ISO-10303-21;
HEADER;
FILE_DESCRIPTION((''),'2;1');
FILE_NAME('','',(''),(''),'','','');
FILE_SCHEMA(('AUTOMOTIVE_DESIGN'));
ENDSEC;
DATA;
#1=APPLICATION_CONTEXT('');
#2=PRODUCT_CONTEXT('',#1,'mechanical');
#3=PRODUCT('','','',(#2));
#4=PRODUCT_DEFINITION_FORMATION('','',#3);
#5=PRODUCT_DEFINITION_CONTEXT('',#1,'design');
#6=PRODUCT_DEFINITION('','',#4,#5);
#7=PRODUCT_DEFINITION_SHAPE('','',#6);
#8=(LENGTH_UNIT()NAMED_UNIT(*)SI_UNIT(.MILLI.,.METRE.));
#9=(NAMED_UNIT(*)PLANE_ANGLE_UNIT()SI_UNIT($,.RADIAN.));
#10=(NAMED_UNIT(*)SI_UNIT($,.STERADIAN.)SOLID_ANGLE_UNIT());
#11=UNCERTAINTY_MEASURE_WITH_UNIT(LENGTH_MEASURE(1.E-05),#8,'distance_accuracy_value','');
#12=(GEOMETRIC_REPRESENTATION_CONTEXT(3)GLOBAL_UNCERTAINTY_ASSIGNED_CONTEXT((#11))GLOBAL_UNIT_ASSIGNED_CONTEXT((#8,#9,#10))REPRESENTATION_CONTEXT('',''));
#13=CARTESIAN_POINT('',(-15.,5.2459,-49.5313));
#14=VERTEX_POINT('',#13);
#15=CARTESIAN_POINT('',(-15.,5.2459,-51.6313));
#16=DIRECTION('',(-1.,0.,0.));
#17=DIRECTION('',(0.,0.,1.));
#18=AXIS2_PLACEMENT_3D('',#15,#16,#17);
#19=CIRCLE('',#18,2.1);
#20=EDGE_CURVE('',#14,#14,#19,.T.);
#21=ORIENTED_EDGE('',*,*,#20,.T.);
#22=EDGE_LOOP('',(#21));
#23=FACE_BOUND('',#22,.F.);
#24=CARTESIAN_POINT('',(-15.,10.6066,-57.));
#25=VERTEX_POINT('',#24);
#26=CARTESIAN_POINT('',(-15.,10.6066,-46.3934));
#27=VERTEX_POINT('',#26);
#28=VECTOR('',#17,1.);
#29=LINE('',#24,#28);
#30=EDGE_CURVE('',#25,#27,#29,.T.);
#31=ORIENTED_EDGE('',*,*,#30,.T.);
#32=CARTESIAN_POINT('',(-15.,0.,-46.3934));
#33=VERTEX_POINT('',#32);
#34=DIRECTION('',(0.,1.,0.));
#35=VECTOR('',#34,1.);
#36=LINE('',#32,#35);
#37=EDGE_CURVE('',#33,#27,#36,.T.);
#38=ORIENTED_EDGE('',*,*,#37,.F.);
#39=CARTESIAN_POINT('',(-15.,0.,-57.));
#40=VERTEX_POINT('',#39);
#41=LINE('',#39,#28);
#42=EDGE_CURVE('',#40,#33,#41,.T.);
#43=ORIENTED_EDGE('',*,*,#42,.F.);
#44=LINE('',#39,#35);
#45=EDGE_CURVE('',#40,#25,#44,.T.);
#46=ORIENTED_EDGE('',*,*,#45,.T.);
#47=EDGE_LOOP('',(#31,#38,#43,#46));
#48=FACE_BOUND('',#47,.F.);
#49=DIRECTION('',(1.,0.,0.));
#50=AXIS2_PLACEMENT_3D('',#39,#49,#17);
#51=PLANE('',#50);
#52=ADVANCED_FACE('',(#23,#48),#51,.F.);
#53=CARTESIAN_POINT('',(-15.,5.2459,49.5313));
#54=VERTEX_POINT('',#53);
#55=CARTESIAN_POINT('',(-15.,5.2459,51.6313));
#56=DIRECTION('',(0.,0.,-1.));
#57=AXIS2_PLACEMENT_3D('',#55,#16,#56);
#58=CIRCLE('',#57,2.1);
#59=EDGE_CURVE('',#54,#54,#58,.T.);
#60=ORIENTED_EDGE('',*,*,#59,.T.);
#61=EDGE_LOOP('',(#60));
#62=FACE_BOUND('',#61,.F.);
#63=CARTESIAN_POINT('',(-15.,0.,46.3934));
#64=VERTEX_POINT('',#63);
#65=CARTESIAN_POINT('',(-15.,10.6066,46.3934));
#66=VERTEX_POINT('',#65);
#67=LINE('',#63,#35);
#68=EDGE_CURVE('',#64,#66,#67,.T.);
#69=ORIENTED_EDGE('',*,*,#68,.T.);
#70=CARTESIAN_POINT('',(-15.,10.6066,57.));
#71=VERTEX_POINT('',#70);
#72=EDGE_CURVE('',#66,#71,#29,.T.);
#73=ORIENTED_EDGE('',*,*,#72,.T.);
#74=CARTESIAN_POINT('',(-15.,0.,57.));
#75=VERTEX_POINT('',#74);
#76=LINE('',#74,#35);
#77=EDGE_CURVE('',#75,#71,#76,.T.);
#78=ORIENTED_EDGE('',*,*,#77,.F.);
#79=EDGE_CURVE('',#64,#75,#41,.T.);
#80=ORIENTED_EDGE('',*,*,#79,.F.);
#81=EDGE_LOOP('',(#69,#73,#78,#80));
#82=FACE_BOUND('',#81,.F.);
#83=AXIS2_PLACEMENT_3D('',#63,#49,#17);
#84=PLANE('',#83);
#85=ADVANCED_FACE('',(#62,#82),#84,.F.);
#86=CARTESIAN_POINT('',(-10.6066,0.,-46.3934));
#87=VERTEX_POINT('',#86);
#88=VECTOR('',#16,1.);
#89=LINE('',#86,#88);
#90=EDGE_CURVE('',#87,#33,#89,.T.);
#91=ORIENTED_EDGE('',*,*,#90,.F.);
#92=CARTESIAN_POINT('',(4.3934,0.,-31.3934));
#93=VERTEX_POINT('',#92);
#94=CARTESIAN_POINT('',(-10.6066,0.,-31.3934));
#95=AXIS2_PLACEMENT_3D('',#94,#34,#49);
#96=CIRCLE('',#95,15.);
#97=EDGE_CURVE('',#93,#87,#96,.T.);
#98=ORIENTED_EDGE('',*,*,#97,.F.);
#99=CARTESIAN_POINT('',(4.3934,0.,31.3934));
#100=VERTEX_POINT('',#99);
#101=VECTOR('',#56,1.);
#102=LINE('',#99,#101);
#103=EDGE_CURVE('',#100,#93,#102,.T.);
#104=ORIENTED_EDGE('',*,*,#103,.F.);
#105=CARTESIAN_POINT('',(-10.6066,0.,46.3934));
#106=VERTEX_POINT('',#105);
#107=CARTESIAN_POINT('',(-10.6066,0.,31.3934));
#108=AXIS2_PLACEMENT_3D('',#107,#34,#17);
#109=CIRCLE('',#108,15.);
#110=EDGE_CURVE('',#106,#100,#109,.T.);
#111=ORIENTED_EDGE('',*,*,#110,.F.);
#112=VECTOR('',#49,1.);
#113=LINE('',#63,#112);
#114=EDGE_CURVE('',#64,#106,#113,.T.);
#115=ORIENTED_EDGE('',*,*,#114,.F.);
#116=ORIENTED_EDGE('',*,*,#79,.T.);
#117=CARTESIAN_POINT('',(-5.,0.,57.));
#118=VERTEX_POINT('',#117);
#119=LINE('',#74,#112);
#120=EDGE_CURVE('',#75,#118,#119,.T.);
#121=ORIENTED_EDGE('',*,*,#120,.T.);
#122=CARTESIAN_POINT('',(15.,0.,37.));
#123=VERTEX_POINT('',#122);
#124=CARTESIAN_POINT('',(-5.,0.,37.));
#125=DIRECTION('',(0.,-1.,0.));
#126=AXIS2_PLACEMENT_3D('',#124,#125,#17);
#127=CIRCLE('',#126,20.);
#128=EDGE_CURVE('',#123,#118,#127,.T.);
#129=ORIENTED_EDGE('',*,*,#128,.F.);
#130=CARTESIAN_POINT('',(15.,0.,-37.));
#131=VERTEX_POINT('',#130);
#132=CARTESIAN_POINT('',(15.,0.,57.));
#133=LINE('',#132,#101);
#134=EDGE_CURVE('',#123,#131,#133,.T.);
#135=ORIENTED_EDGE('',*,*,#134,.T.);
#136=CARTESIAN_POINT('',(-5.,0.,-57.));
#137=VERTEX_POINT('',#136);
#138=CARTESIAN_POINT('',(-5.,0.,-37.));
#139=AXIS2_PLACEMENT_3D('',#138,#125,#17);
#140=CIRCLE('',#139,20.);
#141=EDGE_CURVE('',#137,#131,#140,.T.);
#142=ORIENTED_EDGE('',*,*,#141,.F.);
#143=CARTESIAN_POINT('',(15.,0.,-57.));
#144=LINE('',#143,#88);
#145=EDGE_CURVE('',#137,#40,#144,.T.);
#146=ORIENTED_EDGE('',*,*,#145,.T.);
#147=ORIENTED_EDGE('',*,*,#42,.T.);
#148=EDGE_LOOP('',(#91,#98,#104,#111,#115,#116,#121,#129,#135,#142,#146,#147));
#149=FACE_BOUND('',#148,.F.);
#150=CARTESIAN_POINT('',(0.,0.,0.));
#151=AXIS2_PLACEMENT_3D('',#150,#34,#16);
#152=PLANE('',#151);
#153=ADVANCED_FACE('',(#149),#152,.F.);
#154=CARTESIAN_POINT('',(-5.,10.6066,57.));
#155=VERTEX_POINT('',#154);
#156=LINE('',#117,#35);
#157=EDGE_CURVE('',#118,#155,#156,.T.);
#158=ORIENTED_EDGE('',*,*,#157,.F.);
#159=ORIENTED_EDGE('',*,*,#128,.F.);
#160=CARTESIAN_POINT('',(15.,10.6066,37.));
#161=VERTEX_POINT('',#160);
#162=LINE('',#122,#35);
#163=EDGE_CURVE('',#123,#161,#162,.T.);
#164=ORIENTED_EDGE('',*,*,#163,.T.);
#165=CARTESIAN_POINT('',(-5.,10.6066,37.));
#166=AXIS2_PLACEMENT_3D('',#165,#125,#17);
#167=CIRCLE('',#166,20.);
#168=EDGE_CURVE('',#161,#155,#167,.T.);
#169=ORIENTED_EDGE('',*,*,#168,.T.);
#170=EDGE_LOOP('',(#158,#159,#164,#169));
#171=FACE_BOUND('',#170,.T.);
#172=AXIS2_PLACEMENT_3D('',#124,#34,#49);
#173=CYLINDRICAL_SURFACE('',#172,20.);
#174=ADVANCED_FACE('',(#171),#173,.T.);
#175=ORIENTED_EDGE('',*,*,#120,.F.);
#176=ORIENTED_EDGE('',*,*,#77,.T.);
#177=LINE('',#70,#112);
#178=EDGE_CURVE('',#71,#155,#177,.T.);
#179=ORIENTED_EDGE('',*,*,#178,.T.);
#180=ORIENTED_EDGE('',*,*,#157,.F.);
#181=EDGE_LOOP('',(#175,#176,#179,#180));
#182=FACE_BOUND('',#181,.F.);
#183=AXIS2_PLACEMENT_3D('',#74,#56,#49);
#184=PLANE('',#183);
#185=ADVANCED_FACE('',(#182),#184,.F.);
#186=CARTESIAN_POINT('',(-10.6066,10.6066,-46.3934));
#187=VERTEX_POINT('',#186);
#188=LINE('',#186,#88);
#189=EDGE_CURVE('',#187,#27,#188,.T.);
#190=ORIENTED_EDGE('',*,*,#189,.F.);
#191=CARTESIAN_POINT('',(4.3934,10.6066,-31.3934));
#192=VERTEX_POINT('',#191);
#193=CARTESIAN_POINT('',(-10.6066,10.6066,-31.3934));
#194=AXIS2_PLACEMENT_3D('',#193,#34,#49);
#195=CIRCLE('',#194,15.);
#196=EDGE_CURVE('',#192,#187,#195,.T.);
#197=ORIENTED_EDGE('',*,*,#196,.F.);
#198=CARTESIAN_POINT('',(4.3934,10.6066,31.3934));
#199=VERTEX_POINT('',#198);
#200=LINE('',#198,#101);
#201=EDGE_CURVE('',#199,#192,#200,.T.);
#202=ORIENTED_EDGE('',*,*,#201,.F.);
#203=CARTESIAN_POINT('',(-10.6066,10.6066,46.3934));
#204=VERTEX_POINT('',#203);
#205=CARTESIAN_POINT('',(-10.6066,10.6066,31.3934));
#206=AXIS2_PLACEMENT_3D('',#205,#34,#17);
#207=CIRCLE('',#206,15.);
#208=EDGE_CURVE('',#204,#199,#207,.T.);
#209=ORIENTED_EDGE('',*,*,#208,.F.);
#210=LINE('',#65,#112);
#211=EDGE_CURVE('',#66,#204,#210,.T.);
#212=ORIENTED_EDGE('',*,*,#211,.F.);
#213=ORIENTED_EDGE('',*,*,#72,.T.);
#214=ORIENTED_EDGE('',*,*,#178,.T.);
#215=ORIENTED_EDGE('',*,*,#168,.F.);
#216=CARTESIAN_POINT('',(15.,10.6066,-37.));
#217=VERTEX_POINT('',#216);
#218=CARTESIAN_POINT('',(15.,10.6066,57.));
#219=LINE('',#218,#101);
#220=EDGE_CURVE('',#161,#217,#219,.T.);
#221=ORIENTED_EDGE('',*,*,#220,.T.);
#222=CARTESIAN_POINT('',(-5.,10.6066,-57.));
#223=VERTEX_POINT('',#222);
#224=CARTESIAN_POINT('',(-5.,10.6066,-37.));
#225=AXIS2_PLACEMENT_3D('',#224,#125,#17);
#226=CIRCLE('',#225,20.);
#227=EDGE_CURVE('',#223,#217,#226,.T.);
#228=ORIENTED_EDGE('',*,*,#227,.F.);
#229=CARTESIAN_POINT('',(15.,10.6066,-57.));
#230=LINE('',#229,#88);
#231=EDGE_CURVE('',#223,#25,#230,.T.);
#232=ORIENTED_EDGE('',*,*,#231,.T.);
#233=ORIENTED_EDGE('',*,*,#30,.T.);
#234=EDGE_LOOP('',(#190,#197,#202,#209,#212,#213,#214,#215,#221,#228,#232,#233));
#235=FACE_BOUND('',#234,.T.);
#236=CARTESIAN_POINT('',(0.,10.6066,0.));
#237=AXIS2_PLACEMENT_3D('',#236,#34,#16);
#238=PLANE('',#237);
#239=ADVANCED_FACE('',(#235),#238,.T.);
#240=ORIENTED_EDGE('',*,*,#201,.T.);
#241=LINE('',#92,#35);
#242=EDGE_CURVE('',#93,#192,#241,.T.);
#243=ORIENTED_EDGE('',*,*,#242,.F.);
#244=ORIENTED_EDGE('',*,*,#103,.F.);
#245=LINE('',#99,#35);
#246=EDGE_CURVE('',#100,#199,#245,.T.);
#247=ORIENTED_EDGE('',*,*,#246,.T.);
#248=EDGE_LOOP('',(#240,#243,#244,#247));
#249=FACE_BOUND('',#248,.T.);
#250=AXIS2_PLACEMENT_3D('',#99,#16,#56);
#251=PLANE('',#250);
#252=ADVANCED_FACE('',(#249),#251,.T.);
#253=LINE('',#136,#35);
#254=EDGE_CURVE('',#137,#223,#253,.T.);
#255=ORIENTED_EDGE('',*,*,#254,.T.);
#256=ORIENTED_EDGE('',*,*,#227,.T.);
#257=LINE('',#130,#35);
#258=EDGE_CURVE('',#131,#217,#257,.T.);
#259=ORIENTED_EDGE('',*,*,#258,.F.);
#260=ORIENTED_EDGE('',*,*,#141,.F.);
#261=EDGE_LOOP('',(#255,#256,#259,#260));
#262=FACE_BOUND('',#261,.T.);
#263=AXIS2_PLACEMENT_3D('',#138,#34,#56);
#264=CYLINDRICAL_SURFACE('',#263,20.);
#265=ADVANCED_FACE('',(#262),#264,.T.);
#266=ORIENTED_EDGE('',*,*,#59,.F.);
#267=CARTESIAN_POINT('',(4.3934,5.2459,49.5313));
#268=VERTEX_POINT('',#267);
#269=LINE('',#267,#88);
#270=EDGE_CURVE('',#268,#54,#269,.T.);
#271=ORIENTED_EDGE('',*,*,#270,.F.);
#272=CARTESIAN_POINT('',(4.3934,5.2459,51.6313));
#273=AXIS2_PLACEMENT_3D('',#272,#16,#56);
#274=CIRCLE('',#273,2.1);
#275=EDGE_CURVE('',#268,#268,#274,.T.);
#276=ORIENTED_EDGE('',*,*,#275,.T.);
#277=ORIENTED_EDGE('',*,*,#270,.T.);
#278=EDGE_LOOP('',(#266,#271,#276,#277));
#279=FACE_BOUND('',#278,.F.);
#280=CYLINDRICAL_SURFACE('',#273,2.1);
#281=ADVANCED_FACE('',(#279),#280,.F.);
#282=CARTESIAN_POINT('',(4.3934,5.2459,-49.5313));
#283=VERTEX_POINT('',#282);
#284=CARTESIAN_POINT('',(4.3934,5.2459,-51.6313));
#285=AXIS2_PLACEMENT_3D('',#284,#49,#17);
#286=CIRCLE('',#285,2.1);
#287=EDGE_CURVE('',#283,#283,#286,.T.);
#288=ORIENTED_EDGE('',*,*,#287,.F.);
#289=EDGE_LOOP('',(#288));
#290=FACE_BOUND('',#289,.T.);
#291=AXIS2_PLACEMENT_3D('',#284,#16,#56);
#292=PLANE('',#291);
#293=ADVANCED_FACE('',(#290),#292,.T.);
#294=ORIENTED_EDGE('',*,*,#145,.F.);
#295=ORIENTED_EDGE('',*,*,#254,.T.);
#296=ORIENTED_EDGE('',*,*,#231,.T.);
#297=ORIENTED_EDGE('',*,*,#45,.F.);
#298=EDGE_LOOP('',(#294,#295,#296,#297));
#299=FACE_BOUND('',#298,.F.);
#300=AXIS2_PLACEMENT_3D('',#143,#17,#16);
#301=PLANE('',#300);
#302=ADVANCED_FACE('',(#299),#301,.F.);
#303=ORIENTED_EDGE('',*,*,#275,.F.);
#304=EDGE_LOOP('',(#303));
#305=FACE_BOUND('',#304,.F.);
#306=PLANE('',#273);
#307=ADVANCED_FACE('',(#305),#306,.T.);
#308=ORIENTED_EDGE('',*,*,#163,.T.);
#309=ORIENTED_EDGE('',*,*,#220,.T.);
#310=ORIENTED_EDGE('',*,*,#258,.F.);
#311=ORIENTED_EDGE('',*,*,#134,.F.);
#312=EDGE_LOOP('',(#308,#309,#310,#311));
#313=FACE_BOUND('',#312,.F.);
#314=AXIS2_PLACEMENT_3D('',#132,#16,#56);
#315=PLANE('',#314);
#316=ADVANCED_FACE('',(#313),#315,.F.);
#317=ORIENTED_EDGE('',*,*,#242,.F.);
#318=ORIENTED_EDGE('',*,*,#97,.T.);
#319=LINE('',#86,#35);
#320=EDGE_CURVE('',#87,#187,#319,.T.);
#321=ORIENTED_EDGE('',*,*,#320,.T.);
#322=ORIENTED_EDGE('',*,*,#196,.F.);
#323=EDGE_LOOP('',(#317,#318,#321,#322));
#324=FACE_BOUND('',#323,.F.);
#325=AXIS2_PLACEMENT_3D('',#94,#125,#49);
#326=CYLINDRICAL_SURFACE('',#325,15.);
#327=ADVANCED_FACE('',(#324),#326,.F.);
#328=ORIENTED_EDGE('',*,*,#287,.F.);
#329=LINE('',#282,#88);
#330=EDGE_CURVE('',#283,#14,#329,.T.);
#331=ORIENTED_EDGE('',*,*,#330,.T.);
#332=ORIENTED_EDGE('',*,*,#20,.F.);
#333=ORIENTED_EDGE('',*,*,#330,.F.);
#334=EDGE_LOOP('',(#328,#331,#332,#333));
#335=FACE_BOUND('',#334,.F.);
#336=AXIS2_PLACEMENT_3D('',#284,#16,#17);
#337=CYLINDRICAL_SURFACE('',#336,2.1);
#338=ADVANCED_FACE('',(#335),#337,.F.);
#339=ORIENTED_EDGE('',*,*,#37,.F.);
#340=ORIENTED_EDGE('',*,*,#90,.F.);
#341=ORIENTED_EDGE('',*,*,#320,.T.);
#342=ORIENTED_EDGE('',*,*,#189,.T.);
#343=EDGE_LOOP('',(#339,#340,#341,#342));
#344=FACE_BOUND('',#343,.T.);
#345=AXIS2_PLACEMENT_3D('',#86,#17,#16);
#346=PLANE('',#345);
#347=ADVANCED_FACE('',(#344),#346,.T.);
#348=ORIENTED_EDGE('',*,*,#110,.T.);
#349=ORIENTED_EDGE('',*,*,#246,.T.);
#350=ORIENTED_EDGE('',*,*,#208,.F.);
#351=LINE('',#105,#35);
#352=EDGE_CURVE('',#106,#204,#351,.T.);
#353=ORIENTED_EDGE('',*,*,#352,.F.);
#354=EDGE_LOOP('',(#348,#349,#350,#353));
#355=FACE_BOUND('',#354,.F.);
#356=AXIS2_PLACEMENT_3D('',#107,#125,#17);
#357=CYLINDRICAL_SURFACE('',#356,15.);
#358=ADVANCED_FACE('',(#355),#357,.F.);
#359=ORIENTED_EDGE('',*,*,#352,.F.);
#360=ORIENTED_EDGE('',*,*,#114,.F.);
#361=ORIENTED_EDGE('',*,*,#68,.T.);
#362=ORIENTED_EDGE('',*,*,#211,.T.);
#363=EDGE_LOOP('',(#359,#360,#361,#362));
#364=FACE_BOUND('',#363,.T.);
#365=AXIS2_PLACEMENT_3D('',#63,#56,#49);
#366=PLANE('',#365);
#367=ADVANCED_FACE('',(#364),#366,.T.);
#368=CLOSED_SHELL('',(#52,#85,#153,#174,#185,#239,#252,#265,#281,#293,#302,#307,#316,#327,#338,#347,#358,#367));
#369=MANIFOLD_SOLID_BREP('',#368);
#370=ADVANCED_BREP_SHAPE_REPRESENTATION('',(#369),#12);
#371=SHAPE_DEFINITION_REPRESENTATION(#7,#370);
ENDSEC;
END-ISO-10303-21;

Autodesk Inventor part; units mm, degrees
ref_plane "YZ Plane" through (0, 0, 0) normal (1, 0, 0) x (0, 1, 0)
ref_plane "XZ Plane" through (0, 0, 0) normal (0, 1, 0) x (-1, 0, 0)
ref_plane "XY Plane" through (0, 0, 0) normal (0, 0, 1) x (1, 0, 0)
sketch "Sketch1" plane through (0, 0, 0) normal (0, 1, 0) x (-1, 0, 0)
  line L0 (15, 57) -> (-15, 57)
  line L1 (-15, 57) -> (-15, -57)
  line L2 (-15, -57) -> (15, -57)
  line L3 (15, -57) -> (15, 57)
  line L4 (0, 57) -> (0, -57) construction
  line L5 (15, 0) -> (-15, 0) construction
  line L6 (15, 46.3934) -> (10.6066, 46.3934)
  line L7 (-4.3934, 31.3934) -> (-4.3934, -31.3934)
  line L8 (10.6066, -46.3934) -> (15, -46.3934)
  line L9 (15, -46.3934) -> (15, 46.3934)
  arc A0 (10.6066, 46.3934) -> (-4.3934, 31.3934) centre (10.6066, 31.3934) ccw
  arc A1 (-4.3934, -31.3934) -> (10.6066, -46.3934) centre (10.6066, -31.3934) ccw
  point P0 (0, 0)
  point P1 (-4.3934, -46.3934)
  point P2 (-4.3934, 46.3934)
  dimension "d0" = 114
  dimension "d1" = 30
  dimension "d4" = 15
  dimension "d5" = 10.6066
  dimension "d17" = 92.7868
  dimension "d20" = 15
extrude "Extrusion1" add sketch "Sketch1" along normal blind 10.6066 contours L3 L6 A0 L7 A1 L8 L2 L1 L0
sketch "Sketch4" plane through (4.3934, 0, 46.3934) normal (-1, 0, 0) x (0, 0, 1)
  circle A0 centre (5.2379, 5.2459) radius 2.1 projected
  circle A1 centre (-98.0247, 5.2459) radius 2.1 projected
  line L0 (5.2379, 5.2459) -> (-98.0247, 5.2459)
  point P0 (-46.3934, 0)
  dimension "d18" = 103.2627
fillet "Fillet2" radius 20 2 edges at (15, 5.3033, 57) (15, 5.3033, -57)
hole "Hole2" at (4.3934, 5.2459, 51.6313) direction (-1, 0, 0) diameter 4.2 end through all
mirror "Mirror2" about plane through (0, 0, 0) normal (0, 0, 1) of "Hole2"
equation "\"d6\" = d5"
properties part number "acc door handle"
